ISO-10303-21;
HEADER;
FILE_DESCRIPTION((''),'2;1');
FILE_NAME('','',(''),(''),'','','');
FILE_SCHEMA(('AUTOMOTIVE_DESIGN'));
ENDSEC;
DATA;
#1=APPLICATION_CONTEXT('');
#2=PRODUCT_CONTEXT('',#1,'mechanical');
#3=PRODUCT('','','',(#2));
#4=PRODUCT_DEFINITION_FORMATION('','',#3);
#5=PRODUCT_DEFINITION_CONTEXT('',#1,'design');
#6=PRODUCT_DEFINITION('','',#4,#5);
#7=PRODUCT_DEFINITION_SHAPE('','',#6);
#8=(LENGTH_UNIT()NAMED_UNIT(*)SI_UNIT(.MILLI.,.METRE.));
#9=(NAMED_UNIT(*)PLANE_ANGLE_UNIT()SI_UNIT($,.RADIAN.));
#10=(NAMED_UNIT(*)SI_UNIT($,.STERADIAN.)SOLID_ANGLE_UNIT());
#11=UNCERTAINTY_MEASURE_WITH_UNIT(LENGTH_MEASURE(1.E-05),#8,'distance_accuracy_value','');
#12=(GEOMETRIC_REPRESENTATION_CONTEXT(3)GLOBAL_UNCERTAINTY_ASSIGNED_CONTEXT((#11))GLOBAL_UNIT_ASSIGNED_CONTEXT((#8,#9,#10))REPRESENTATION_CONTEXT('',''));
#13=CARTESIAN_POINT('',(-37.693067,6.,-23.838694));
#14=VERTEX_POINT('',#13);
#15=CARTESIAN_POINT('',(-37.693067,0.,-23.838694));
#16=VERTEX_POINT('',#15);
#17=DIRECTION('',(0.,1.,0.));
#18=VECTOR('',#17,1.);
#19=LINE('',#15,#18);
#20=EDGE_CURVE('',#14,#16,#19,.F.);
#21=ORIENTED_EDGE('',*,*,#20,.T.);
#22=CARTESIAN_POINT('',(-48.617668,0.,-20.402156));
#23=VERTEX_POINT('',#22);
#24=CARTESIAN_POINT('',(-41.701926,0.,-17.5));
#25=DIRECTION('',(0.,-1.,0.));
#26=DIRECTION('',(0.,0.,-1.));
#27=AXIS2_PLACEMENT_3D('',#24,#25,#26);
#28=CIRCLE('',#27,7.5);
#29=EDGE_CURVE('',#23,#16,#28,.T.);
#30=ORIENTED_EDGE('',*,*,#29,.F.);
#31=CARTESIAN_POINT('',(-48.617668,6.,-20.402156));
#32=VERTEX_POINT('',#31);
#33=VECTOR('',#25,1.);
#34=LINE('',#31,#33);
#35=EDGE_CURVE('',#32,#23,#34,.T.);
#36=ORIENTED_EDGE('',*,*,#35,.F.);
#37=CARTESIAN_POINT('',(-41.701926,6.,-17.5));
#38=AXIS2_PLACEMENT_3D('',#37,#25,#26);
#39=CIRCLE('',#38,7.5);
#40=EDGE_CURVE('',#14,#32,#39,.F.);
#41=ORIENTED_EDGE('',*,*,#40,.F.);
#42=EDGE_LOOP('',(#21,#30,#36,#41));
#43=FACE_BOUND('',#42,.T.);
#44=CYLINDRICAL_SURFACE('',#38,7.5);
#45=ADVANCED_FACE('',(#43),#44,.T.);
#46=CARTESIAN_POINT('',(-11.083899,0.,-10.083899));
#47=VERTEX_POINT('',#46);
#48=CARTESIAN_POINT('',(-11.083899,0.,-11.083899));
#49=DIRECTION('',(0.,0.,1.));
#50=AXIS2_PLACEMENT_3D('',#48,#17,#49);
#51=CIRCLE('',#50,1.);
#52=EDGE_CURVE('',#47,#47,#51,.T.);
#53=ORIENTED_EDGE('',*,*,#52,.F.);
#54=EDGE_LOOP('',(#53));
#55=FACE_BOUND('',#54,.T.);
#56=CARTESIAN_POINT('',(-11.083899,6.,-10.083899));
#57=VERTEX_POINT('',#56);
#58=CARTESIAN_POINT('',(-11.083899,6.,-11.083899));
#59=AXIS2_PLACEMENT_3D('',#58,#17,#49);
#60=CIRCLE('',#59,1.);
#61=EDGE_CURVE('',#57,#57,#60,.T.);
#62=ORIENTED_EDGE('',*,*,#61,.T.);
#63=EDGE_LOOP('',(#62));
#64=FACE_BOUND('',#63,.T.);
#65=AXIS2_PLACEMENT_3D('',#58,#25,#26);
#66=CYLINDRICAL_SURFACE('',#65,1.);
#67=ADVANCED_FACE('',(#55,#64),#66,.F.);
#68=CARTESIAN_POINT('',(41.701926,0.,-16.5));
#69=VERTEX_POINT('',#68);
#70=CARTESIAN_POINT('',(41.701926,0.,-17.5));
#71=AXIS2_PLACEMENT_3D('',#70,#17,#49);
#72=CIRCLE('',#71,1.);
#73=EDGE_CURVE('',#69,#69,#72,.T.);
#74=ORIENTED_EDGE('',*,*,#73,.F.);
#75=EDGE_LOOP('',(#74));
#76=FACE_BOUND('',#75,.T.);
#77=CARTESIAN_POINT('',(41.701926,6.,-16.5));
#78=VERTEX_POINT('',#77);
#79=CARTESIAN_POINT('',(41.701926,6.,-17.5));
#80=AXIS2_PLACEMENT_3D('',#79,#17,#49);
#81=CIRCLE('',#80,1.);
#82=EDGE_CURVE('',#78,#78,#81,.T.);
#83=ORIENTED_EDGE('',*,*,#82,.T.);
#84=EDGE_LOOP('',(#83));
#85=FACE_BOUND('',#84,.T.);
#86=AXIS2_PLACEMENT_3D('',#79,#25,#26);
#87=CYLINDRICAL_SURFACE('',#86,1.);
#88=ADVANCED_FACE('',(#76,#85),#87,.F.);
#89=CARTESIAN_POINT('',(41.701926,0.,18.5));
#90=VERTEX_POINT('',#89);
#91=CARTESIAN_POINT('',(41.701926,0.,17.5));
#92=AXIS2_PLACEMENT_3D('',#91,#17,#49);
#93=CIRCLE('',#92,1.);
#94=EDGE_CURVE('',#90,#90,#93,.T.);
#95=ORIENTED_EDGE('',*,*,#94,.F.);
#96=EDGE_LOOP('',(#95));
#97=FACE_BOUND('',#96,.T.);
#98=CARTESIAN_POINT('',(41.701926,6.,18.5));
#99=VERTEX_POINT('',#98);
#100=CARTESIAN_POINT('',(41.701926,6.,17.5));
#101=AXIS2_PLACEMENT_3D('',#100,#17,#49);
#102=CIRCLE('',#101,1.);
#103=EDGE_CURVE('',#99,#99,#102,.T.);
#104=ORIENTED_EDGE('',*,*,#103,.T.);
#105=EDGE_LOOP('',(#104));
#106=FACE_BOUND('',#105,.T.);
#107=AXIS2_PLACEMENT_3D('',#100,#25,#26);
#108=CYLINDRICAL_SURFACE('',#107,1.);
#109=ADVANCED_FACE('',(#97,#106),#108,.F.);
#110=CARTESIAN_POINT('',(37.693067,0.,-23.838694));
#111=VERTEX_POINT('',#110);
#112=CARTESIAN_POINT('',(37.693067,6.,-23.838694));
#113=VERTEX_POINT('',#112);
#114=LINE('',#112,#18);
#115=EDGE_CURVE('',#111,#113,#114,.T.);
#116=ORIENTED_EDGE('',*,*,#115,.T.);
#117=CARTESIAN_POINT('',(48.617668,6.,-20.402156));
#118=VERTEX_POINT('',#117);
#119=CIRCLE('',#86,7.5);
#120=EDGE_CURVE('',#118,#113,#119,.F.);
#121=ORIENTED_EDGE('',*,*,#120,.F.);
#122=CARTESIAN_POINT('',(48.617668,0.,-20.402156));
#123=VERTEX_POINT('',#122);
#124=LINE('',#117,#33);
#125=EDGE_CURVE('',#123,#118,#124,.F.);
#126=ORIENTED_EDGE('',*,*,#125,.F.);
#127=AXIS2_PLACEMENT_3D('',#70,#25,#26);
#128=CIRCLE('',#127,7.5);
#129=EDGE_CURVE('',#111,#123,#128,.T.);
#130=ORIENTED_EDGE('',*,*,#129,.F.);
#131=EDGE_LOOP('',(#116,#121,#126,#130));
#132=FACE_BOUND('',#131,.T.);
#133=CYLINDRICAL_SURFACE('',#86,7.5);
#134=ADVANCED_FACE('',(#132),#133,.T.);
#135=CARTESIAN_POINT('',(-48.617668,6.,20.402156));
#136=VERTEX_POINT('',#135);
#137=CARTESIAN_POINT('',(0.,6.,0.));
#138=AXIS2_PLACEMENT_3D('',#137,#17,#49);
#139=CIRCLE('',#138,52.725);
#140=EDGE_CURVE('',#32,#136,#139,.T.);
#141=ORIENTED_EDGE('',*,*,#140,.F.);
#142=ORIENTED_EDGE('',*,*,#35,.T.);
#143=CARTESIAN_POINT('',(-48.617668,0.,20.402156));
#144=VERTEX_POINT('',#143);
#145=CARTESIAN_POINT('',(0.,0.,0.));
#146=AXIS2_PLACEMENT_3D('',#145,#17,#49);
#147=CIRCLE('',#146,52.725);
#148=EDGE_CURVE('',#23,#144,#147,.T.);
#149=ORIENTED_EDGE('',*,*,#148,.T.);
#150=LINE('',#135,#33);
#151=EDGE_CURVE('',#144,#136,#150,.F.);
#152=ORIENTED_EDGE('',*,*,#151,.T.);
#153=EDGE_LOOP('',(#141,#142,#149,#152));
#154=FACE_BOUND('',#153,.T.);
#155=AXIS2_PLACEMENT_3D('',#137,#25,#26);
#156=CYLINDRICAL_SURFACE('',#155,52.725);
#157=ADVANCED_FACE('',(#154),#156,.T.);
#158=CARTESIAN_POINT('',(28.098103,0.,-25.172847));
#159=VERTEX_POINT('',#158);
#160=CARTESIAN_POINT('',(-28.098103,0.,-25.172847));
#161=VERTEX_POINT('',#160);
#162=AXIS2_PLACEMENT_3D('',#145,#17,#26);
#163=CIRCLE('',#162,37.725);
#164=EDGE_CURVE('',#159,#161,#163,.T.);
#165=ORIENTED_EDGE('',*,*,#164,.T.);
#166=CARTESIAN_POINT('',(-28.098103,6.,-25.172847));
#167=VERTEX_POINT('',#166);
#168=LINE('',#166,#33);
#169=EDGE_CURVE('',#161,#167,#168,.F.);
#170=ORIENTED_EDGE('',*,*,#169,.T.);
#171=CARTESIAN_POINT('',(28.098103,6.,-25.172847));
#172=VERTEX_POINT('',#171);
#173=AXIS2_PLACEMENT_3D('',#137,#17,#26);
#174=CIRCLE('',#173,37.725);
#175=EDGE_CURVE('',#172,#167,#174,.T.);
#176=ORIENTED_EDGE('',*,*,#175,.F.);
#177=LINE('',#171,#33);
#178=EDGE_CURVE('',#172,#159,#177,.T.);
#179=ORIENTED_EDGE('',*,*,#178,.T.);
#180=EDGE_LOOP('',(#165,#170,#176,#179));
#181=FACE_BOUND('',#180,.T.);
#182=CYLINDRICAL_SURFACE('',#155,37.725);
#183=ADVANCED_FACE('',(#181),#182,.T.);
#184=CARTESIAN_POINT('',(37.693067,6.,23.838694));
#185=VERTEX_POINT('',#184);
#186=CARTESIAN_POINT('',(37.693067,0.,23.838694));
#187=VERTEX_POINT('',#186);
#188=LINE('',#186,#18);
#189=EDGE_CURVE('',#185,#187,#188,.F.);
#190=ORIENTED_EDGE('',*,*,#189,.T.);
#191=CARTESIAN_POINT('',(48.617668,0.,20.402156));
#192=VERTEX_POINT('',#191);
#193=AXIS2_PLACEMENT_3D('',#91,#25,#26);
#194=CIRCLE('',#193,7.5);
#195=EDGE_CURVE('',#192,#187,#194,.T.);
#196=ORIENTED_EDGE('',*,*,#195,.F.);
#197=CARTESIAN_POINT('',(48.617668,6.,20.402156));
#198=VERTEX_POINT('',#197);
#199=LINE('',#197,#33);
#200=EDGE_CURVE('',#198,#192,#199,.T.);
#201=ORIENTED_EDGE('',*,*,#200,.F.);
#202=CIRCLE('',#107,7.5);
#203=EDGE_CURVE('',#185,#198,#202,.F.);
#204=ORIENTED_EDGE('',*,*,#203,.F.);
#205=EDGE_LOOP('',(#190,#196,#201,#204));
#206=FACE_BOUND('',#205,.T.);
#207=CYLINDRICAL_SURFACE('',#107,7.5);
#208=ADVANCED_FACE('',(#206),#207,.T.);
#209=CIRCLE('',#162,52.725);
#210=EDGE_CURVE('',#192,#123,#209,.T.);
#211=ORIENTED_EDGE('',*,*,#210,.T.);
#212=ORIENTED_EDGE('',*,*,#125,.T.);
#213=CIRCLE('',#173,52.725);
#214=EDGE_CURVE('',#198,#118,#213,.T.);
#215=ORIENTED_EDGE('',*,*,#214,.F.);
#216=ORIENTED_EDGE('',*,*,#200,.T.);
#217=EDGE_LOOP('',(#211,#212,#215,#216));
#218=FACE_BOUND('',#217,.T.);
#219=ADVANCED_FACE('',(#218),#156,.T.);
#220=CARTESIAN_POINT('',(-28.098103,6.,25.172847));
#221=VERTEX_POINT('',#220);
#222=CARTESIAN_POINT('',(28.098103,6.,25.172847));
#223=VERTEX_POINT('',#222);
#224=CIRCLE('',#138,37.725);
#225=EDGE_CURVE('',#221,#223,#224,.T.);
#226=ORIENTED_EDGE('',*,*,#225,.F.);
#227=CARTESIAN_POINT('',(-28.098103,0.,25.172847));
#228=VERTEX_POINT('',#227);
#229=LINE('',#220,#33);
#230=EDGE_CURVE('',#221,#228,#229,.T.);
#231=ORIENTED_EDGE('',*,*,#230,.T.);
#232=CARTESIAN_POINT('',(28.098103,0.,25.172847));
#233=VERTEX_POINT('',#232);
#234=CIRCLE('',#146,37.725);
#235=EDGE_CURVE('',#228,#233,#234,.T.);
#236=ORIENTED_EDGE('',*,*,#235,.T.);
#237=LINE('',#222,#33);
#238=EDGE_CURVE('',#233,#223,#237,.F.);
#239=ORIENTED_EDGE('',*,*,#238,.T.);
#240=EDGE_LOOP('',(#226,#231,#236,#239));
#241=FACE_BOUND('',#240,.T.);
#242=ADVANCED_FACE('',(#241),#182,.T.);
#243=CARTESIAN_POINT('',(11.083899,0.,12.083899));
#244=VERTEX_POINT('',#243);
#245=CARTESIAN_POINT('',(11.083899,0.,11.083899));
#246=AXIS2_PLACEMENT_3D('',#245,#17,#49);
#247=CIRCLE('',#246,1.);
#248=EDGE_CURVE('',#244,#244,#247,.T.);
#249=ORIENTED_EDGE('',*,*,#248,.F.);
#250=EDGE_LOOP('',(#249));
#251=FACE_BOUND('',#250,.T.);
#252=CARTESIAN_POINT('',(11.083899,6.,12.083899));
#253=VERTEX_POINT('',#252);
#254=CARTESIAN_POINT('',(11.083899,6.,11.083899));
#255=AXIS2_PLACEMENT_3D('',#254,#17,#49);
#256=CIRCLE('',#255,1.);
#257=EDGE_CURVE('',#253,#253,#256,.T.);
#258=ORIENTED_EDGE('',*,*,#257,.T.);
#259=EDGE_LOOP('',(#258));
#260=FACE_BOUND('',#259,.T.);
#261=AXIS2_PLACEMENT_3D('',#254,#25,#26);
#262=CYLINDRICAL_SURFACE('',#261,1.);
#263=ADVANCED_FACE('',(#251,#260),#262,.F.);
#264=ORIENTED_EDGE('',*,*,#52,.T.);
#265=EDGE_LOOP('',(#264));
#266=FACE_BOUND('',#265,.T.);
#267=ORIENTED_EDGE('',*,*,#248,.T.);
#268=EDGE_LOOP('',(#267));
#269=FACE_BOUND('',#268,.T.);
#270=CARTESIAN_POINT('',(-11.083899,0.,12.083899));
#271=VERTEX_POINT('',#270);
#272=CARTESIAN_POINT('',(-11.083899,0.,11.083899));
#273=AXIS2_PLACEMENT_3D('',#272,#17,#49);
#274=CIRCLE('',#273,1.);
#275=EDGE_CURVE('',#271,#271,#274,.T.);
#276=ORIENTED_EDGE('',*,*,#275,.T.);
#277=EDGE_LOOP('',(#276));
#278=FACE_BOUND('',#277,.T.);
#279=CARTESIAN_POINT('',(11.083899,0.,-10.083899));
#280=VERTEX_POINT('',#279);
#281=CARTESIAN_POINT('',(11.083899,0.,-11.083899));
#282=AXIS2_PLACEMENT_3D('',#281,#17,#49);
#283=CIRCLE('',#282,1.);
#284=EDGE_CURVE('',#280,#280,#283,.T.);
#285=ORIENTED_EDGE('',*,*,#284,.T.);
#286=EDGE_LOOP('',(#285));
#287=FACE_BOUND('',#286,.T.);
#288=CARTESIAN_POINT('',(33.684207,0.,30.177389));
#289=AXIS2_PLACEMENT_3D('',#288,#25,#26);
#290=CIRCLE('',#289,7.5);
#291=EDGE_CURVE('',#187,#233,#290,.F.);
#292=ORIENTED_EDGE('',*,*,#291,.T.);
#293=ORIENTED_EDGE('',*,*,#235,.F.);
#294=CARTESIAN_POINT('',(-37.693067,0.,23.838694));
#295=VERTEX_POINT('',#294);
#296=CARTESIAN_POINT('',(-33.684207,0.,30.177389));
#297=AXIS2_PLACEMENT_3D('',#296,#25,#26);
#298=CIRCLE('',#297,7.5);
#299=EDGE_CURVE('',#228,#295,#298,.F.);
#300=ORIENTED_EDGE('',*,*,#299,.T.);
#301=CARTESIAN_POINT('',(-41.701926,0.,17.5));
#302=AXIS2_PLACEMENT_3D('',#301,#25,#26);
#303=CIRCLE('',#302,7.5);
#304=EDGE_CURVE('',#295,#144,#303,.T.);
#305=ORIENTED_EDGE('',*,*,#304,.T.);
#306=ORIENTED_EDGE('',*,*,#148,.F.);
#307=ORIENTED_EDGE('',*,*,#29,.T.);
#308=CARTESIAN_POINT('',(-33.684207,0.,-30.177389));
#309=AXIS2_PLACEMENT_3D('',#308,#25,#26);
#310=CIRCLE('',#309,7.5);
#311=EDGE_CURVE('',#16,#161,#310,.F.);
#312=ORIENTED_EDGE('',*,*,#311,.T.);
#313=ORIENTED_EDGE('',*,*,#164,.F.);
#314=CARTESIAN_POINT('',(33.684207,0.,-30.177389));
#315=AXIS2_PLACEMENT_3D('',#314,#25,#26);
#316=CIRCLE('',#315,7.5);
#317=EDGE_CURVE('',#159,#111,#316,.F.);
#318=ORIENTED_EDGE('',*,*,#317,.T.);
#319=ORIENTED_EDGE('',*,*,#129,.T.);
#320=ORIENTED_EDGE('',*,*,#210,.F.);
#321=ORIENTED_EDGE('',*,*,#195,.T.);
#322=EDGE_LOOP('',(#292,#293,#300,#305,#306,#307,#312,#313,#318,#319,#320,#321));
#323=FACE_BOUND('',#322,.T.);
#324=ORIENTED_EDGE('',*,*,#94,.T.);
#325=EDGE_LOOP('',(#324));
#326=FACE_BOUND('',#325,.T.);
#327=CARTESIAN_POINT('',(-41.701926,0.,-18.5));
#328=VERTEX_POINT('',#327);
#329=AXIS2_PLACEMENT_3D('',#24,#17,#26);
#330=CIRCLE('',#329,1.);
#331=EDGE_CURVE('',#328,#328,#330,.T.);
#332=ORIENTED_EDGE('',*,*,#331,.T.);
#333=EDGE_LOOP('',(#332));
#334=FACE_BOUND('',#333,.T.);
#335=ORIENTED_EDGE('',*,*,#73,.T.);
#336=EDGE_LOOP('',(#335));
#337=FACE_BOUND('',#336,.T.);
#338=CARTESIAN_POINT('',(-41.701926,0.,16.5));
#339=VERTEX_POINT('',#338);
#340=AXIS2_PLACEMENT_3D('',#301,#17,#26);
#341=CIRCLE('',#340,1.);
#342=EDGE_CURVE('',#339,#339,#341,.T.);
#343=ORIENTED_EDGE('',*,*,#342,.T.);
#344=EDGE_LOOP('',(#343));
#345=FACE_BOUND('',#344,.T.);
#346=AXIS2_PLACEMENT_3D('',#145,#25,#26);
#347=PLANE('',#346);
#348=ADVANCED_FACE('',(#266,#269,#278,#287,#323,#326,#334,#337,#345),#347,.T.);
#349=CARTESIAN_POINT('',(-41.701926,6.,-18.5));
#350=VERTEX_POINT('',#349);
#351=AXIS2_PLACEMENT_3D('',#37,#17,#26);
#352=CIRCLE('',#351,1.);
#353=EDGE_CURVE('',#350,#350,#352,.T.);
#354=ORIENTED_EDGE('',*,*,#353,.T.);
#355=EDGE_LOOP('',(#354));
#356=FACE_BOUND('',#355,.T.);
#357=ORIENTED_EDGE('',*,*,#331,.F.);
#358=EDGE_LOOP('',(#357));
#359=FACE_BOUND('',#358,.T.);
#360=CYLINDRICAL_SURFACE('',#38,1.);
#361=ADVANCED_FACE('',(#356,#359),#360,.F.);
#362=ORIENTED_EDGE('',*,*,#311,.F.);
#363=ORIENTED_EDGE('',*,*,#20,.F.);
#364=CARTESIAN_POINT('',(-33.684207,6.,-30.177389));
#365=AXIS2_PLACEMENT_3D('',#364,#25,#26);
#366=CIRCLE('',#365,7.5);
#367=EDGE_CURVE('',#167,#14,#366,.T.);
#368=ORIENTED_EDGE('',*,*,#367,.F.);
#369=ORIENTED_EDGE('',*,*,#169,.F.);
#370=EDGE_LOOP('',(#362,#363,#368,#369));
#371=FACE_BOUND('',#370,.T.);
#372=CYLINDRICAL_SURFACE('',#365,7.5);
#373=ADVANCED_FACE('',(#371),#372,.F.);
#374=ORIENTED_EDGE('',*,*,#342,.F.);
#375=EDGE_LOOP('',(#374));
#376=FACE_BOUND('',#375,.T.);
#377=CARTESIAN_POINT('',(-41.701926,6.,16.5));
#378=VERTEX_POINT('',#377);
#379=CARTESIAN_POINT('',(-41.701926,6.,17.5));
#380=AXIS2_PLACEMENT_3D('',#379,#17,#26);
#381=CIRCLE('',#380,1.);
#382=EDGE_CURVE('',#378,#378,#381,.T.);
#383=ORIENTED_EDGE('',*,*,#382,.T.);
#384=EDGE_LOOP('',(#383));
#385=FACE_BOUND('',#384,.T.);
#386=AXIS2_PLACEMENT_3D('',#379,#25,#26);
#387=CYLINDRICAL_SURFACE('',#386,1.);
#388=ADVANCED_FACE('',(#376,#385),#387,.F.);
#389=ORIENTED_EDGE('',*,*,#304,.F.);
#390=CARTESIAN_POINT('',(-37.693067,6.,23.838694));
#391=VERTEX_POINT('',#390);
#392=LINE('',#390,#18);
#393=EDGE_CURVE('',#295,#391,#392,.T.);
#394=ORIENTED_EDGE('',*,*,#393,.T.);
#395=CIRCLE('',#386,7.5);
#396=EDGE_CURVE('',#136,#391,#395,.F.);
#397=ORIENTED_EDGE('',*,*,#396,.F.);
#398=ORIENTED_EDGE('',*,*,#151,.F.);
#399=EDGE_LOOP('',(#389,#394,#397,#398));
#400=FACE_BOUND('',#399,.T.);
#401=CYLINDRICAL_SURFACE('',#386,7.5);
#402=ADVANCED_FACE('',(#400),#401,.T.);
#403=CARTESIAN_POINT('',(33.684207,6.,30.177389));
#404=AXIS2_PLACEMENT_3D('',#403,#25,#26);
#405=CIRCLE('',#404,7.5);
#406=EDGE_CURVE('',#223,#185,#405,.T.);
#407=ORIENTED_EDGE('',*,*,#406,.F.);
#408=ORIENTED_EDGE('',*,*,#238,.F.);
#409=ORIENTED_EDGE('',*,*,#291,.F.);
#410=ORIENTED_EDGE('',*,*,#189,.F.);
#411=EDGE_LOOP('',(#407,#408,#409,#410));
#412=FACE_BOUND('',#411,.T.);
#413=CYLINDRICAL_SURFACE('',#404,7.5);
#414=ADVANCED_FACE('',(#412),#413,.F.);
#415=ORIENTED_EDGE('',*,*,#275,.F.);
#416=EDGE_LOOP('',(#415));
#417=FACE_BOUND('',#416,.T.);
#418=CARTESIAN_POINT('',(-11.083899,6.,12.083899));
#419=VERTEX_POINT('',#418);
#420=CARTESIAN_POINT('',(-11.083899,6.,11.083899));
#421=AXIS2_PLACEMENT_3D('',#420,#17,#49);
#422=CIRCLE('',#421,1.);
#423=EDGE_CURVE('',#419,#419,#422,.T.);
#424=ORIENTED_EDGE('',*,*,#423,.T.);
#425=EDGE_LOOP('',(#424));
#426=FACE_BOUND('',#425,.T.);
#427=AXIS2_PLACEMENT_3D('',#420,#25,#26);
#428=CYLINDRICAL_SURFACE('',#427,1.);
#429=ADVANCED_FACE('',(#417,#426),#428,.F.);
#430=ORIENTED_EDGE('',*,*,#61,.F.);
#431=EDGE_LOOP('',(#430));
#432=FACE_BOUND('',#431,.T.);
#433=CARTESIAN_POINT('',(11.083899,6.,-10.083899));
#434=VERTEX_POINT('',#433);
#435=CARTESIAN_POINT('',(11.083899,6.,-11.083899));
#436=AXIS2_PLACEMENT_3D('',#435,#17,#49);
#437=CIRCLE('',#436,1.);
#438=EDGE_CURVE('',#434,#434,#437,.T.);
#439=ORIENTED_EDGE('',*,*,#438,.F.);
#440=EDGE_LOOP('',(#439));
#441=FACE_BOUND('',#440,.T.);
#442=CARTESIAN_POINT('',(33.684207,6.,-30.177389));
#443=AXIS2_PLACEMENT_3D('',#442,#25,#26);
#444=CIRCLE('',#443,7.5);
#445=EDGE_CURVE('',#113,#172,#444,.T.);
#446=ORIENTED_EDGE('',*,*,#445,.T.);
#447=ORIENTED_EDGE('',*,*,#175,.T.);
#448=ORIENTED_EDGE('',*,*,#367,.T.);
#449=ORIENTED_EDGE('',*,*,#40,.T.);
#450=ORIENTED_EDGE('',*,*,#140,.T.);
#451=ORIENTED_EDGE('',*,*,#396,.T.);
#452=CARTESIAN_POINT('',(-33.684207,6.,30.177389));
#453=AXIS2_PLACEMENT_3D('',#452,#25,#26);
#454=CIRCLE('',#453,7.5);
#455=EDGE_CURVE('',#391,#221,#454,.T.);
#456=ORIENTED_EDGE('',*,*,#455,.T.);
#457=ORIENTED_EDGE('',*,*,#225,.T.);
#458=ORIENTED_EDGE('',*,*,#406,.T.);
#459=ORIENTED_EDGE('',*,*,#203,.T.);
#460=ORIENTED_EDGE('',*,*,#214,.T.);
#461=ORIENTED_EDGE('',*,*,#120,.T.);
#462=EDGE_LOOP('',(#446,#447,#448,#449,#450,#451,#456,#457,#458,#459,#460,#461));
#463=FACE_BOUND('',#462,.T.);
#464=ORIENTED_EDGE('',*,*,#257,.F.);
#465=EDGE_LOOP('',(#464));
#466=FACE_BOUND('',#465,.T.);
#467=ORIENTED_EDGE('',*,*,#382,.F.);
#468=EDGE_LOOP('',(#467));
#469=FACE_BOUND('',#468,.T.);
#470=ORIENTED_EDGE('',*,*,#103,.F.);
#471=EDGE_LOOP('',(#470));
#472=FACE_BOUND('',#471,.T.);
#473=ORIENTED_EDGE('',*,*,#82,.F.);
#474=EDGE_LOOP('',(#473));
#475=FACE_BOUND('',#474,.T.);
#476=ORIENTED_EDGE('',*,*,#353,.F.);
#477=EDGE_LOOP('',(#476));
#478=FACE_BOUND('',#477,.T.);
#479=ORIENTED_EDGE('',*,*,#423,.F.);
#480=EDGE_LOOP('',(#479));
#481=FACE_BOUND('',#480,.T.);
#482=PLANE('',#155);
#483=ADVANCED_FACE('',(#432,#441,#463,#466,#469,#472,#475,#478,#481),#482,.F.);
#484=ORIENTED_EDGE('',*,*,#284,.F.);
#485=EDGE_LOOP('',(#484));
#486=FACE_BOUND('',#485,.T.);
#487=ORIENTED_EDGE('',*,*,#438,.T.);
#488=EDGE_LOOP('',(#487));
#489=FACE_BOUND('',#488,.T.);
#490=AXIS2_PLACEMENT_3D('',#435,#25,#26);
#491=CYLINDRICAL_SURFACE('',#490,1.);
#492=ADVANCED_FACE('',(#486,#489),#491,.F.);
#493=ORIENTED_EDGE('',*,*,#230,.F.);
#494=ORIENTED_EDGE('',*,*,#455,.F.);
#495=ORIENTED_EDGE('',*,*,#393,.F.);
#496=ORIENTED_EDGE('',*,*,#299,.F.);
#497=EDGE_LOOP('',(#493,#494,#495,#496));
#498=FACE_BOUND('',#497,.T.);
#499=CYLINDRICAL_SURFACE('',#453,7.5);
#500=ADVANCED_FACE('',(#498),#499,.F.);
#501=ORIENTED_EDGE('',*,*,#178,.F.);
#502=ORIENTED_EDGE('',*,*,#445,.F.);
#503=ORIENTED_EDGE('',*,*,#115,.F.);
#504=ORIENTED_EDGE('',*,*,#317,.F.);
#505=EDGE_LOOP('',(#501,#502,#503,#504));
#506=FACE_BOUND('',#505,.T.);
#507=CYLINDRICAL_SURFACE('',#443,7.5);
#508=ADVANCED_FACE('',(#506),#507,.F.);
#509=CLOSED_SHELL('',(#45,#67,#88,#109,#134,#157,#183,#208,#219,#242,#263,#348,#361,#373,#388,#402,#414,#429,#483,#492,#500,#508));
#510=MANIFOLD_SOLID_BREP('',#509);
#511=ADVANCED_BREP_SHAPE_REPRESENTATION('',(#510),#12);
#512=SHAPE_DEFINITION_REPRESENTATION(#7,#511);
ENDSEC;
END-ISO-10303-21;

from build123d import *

# Parameters (mm, degrees)
SKETCH1_R           = 1
BOSS_EXTRUDE1_DEPTH = 6
FILLET1_R           = 7.5


with BuildPart() as part:
    # Sketch1 → Boss-Extrude1 (new body)
    with BuildSketch(Plane(origin=(0, 0, 0), x_dir=(1, 0, 0), z_dir=(0, 1, 0))):
        with BuildLine():
            Line((31.883633055, 20.164562188), (44.561021943, 28.182280752))
            ThreePointArc((44.561021943, 28.182280752), (52.725, 0), (44.561021943, -28.182280752))
            Line((44.561021943, -28.182280752), (31.883633055, -20.164562188))
            ThreePointArc((31.883633055, -20.164562188), (0, -37.725), (-31.883633055, -20.164562188))
            Line((-31.883633055, -20.164562188), (-44.561021943, -28.182280752))
            ThreePointArc((-44.561021943, -28.182280752), (-52.725, 0), (-44.561021943, 28.182280752))
            Line((-44.561021943, 28.182280752), (-31.883633055, 20.164562188))
            ThreePointArc((-31.883633055, 20.164562188), (0, 37.725), (31.883633055, 20.164562188))
        make_face()
        with Locations(Location((-11.083898795, 11.083898795, 0), (0, 0, 270))):
            Circle(SKETCH1_R, mode=Mode.SUBTRACT)
        with Locations(Location((11.083898795, 11.083898795, 0), (0, 0, 270))):
            Circle(SKETCH1_R, mode=Mode.SUBTRACT)
        with Locations(Location((11.083898795, -11.083898795, 0), (0, 0, 270))):
            Circle(SKETCH1_R, mode=Mode.SUBTRACT)
        with Locations(Location((-11.083898795, -11.083898795, 0), (0, 0, 270))):
            Circle(SKETCH1_R, mode=Mode.SUBTRACT)
        with Locations(Location((41.701925915, 17.5, 0), (0, 0, 270))):
            Circle(SKETCH1_R, mode=Mode.SUBTRACT)
        with Locations(Location((41.701925915, -17.5, 0), (0, 0, 270))):
            Circle(SKETCH1_R, mode=Mode.SUBTRACT)
        with Locations(Location((-41.701925915, 17.5, 0), (0, 0, 90))):
            Circle(SKETCH1_R, mode=Mode.SUBTRACT)
        with Locations(Location((-41.701925915, -17.5, 0), (0, 0, 90))):
            Circle(SKETCH1_R, mode=Mode.SUBTRACT)
    extrude(amount=BOSS_EXTRUDE1_DEPTH)

    # Fillet1
    fillet1_edges = [part.edges().sort_by_distance(p)[0] for p in [
        (44.561021943, 3, 28.182280752),
        (31.883633055, 3, 20.164562188),
        (-44.561021943, 3, 28.182280752),
        (-31.883633055, 3, 20.164562188),
        (44.561021943, 3, -28.182280752),
        (31.883633055, 3, -20.164562188),
        (-44.561021943, 3, -28.182280752),
        (-31.883633055, 3, -20.164562188),
    ]]
    fillet(fillet1_edges, radius=FILLET1_R - 0.0001)  # a hair under: the kernel refuses the full size


solid = part.part
